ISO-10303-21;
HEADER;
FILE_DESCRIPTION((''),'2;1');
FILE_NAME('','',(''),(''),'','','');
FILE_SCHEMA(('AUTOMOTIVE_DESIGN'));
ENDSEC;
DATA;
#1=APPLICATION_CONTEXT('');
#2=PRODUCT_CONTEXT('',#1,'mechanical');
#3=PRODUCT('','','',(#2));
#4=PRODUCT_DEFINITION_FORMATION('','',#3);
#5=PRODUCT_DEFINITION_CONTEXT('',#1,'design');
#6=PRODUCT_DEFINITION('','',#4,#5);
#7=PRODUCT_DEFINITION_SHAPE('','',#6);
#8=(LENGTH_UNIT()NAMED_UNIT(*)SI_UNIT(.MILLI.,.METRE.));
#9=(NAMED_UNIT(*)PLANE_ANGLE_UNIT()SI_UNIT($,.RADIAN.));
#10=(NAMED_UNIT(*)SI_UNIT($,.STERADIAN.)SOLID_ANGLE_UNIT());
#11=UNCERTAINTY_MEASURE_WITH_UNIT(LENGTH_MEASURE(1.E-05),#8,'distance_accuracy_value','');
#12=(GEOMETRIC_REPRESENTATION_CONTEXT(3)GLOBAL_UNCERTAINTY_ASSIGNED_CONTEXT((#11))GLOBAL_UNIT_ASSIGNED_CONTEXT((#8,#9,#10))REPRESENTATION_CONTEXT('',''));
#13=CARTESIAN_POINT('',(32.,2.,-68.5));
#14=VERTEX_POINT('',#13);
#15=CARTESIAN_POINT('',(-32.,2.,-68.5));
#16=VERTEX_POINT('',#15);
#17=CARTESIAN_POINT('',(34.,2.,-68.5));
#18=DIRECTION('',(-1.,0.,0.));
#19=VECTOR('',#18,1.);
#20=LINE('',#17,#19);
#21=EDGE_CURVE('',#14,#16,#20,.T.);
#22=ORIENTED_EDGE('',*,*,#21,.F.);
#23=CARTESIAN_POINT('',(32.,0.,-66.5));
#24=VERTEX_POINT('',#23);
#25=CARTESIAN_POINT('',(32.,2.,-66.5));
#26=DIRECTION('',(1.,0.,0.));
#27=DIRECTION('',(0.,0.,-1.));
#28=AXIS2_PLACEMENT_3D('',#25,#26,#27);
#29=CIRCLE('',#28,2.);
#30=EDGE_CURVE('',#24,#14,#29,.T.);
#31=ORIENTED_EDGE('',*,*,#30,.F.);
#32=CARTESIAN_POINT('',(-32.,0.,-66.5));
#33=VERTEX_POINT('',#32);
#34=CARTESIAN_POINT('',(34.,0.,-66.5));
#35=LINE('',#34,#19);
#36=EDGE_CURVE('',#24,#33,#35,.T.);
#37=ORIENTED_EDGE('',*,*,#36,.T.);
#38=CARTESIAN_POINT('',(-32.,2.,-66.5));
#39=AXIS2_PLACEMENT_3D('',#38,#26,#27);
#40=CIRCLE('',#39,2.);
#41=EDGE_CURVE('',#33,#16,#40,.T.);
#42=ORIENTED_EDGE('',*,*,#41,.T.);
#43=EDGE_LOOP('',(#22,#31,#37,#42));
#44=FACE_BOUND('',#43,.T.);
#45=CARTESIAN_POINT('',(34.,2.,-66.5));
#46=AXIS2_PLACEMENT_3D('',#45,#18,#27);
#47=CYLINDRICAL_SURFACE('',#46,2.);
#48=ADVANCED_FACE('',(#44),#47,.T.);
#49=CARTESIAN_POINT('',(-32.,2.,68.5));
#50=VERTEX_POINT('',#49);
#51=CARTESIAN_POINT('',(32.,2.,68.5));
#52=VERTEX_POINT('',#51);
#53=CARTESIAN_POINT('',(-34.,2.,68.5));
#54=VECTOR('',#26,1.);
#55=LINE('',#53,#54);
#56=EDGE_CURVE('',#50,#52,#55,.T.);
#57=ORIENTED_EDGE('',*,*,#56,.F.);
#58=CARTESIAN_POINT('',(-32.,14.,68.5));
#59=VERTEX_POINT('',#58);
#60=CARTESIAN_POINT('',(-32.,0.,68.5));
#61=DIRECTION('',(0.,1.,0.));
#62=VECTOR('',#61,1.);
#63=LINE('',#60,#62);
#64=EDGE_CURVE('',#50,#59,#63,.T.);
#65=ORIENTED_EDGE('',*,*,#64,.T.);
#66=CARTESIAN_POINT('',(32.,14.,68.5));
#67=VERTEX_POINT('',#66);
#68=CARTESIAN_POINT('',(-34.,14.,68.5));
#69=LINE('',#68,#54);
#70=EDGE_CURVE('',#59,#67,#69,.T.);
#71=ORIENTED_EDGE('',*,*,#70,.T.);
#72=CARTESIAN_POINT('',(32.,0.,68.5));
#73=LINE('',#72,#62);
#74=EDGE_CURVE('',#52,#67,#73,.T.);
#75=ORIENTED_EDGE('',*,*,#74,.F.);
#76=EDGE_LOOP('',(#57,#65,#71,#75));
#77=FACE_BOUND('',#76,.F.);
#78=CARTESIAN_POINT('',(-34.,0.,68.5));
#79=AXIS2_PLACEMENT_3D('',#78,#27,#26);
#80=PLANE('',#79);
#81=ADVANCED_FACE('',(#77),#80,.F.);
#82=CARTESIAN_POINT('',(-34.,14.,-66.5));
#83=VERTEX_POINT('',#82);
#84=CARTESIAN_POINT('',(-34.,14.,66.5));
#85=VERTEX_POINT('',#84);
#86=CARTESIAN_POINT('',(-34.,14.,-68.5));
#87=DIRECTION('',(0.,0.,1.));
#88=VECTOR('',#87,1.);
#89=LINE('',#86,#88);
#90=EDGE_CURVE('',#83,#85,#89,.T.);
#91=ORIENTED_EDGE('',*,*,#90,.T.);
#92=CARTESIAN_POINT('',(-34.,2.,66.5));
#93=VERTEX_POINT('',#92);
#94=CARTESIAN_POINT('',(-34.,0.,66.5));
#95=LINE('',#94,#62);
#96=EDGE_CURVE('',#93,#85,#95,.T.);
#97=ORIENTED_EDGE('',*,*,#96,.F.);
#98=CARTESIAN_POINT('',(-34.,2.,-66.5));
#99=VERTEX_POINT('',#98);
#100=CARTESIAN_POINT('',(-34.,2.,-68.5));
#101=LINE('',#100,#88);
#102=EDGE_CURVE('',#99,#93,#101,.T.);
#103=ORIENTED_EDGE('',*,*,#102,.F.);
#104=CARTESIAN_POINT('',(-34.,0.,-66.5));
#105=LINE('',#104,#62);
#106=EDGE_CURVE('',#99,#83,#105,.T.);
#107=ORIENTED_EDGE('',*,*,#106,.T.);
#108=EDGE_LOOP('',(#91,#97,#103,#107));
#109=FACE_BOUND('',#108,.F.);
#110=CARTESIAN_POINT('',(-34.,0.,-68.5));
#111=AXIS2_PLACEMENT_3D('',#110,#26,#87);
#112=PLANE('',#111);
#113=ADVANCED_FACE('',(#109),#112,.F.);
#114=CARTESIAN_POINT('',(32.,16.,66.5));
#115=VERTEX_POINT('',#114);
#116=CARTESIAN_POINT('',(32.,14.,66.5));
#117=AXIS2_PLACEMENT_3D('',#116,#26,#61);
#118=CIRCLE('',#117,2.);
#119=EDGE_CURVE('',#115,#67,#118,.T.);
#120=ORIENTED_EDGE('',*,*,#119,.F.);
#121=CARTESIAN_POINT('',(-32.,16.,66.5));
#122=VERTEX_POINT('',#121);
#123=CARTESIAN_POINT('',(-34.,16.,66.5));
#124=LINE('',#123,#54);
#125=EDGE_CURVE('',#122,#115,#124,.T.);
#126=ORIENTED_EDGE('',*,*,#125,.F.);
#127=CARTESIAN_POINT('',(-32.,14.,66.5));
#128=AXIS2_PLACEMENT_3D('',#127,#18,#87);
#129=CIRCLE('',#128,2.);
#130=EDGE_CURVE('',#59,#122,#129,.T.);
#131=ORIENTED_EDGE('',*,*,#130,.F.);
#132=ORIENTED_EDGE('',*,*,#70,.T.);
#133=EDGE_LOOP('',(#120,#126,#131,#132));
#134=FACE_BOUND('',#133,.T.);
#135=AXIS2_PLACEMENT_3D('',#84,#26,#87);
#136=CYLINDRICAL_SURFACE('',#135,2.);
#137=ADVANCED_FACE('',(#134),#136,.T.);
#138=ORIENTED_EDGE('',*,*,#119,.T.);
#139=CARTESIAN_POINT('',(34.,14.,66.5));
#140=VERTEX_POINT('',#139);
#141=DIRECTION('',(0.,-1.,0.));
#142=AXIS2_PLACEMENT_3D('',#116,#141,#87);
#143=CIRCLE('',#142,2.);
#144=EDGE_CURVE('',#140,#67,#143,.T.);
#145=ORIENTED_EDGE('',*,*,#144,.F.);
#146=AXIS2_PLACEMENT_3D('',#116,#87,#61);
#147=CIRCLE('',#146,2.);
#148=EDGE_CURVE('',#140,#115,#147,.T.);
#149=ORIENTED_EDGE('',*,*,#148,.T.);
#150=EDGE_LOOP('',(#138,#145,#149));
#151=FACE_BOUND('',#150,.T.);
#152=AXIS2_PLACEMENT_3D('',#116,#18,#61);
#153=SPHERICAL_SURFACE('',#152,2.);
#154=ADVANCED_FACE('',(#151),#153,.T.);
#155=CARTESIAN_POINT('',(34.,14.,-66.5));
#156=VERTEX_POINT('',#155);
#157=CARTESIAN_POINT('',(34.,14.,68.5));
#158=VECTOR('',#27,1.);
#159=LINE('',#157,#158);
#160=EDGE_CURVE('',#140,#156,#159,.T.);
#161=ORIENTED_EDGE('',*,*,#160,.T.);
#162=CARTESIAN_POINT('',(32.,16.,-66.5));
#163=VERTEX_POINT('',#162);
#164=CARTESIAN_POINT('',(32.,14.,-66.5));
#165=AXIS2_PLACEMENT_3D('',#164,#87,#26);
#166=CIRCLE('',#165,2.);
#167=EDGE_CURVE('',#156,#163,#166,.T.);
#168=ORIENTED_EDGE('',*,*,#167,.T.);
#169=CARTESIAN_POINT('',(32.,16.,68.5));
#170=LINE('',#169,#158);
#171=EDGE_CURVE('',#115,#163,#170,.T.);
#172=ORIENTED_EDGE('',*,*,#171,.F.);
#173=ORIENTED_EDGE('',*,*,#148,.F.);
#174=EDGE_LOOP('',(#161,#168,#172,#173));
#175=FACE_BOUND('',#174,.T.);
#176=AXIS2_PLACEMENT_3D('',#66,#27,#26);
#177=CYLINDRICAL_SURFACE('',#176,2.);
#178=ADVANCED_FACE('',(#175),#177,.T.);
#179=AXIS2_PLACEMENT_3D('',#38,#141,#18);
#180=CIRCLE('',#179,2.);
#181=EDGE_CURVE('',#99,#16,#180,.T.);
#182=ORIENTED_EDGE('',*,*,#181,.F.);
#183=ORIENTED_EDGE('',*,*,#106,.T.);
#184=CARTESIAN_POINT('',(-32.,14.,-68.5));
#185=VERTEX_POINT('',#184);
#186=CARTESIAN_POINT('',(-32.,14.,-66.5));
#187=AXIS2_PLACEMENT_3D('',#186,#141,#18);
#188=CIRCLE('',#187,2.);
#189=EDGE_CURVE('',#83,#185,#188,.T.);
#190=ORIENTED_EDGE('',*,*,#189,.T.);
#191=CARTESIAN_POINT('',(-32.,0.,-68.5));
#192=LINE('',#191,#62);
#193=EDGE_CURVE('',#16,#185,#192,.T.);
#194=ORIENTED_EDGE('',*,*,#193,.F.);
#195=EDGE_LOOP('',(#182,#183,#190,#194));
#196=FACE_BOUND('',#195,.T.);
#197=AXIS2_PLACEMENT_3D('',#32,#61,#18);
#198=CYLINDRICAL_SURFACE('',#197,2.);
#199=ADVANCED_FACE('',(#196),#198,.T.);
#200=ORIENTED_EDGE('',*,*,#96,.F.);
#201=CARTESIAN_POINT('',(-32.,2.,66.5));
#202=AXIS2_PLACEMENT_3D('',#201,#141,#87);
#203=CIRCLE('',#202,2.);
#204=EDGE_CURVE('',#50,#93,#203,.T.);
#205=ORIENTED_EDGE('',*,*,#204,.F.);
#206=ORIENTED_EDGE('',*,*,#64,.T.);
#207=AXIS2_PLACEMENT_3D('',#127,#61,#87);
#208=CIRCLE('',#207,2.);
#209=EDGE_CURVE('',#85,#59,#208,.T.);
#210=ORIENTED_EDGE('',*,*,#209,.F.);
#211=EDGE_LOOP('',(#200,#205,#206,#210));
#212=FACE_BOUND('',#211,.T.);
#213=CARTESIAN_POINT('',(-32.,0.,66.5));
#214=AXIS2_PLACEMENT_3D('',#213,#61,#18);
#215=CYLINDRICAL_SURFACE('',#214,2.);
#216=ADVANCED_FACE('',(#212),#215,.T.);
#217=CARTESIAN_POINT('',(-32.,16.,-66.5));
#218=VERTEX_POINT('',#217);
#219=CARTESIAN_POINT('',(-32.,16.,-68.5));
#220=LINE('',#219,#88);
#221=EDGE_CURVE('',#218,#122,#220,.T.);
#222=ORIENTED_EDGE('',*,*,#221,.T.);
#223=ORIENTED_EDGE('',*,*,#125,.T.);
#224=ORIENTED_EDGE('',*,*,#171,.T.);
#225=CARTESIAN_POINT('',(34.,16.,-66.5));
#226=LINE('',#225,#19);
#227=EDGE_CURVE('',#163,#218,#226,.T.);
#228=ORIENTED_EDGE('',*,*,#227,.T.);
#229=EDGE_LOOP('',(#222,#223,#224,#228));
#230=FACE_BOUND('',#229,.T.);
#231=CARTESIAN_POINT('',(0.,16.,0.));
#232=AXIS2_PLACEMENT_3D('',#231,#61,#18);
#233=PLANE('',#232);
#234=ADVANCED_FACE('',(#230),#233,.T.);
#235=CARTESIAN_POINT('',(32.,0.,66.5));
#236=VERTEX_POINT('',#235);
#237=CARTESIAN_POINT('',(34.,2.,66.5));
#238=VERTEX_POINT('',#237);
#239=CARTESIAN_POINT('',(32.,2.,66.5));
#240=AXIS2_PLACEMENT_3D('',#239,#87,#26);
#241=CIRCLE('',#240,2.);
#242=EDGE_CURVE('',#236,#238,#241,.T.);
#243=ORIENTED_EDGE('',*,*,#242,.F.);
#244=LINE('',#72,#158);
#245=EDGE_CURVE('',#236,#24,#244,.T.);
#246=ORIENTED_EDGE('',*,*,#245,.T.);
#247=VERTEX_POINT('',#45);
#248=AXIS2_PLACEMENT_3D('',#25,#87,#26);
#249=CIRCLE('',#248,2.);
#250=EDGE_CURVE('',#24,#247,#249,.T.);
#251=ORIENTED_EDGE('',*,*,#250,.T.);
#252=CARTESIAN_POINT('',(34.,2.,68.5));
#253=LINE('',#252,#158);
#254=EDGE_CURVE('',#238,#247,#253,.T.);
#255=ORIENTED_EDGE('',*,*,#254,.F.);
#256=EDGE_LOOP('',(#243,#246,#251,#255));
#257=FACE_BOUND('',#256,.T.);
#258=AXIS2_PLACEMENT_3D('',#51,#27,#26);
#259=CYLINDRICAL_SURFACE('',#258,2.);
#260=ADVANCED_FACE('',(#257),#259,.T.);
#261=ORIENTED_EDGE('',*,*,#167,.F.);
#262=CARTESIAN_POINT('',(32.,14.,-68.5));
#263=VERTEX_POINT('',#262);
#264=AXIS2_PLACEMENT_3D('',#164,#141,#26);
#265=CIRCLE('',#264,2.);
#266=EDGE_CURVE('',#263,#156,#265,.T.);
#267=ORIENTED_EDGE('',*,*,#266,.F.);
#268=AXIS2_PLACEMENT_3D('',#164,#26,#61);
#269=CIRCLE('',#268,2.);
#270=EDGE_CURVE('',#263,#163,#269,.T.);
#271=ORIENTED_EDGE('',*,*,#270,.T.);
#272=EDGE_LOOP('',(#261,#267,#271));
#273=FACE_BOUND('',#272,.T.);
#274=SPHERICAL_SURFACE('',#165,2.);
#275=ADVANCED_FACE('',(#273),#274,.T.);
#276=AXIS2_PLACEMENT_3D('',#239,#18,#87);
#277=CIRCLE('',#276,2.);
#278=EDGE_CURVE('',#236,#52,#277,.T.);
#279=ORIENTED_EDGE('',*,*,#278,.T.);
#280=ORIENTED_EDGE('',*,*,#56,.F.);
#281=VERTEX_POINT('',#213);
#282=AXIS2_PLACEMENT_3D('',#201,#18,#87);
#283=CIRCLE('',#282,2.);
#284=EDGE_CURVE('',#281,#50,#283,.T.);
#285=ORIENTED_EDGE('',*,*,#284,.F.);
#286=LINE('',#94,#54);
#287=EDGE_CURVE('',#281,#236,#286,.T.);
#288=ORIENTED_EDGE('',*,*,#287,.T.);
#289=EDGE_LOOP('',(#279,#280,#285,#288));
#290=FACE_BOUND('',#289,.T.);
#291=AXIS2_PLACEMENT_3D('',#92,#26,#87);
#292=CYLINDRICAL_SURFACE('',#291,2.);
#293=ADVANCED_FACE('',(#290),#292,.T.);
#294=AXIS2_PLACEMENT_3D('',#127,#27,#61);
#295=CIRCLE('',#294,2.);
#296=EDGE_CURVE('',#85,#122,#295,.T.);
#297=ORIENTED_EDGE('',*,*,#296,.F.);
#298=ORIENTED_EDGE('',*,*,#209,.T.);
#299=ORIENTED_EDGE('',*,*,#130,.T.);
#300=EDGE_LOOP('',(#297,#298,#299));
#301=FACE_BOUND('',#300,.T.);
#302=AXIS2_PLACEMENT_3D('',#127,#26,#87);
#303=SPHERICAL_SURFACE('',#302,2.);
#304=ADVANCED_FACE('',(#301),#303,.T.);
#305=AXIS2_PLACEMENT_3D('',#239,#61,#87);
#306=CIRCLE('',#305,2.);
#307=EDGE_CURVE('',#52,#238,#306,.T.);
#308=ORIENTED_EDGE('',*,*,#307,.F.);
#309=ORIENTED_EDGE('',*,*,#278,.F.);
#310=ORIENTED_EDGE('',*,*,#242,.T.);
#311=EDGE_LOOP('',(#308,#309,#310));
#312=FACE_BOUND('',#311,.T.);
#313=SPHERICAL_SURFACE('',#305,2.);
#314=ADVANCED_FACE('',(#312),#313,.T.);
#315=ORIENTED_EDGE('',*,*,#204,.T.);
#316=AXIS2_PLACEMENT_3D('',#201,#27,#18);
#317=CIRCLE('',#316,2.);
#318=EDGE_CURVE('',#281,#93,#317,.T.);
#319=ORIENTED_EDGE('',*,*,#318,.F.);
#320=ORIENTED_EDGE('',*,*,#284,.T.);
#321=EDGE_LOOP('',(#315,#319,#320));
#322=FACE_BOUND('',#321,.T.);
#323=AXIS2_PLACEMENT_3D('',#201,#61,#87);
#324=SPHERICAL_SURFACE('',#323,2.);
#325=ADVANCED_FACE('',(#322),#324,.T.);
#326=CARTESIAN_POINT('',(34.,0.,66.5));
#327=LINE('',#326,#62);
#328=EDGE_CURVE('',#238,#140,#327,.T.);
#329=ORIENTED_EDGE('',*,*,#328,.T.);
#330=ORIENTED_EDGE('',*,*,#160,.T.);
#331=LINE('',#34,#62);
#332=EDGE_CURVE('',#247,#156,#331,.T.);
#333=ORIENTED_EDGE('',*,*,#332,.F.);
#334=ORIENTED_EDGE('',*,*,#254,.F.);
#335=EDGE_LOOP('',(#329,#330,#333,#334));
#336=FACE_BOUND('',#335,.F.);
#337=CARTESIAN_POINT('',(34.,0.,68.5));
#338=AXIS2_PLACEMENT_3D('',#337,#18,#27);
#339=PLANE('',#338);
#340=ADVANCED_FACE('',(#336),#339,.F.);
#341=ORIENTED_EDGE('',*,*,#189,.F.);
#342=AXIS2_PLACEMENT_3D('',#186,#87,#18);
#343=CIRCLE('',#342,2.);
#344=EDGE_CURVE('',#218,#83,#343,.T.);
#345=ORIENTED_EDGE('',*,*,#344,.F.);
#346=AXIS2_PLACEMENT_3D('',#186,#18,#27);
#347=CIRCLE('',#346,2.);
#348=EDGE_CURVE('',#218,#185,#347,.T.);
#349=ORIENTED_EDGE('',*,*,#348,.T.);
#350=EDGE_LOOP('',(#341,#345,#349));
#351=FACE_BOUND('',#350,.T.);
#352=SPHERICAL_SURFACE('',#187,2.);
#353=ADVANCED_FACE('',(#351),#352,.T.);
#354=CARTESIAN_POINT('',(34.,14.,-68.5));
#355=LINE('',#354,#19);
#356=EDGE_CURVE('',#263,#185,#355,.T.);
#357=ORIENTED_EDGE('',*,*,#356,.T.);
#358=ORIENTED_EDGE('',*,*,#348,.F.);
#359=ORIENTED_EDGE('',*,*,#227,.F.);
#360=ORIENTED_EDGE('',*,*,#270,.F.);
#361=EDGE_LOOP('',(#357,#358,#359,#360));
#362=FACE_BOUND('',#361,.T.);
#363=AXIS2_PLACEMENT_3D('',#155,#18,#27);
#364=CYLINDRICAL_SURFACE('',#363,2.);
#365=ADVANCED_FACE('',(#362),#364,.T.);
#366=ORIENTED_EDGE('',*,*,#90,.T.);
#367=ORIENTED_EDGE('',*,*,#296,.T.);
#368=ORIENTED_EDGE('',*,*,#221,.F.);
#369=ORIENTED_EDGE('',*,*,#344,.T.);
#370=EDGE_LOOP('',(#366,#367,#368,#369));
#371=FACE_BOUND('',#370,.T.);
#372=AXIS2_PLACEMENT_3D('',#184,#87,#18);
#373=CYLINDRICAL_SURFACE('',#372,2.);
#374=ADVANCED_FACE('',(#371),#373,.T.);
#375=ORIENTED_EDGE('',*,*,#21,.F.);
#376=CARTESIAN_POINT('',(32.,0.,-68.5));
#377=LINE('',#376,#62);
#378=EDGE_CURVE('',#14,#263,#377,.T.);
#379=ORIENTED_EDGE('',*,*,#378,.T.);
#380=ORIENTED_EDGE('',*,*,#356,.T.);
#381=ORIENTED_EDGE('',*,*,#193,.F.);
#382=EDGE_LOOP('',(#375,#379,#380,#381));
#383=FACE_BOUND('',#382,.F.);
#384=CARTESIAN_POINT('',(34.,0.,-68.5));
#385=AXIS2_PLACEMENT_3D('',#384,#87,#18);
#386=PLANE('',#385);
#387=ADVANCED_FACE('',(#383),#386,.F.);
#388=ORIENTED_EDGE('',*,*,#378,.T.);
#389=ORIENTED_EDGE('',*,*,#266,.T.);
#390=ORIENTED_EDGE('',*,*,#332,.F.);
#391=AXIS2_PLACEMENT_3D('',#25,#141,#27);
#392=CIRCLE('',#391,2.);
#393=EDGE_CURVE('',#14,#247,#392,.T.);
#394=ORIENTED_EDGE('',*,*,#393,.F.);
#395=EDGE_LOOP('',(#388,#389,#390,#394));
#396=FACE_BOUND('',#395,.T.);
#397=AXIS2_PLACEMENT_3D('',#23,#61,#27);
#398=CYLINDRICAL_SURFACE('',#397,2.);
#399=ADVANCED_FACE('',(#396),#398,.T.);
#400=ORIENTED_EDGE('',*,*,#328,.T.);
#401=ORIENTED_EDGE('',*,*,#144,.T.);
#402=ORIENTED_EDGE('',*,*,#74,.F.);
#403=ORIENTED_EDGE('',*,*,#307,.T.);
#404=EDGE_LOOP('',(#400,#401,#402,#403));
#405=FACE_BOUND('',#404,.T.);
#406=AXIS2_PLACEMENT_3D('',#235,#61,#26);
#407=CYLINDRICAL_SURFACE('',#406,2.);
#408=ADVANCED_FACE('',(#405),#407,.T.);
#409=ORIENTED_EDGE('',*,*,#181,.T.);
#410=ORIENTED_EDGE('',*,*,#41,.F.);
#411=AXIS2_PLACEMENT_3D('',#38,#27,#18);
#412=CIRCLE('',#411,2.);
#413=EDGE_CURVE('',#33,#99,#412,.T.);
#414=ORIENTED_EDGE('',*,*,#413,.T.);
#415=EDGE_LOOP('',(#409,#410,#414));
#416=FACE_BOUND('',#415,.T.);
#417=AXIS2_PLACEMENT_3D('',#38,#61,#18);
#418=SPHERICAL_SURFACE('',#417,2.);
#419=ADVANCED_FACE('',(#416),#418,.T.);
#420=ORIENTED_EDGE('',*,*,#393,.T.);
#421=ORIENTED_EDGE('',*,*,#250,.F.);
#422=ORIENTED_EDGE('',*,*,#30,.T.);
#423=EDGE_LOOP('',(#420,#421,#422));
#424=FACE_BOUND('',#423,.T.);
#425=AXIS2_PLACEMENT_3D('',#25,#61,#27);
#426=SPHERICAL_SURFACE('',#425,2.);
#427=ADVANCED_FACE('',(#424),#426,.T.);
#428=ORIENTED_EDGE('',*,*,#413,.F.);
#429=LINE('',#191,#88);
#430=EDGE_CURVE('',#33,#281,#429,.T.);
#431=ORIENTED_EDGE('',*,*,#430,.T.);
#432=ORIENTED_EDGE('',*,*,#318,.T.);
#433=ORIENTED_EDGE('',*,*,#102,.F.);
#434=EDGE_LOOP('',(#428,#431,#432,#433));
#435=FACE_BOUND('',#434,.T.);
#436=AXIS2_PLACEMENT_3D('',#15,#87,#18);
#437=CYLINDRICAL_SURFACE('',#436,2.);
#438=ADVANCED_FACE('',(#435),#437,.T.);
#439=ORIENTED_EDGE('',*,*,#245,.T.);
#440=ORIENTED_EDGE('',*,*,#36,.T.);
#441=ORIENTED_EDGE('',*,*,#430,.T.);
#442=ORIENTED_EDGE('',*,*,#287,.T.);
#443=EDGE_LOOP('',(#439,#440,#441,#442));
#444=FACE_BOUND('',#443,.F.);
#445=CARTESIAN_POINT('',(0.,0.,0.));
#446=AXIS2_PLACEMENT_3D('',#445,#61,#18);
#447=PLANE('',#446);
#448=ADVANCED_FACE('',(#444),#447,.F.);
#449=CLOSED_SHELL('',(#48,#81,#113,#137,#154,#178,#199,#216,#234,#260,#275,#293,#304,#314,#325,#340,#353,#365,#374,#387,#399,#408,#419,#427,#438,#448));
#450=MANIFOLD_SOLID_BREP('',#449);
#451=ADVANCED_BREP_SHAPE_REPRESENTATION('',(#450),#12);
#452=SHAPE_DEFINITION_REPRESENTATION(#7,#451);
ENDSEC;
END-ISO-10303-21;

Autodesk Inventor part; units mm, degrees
ref_plane "YZ Plane" through (0, 0, 0) normal (1, 0, 0) x (0, 1, 0)
ref_plane "XZ Plane" through (0, 0, 0) normal (0, 1, 0) x (-1, 0, 0)
ref_plane "XY Plane" through (0, 0, 0) normal (0, 0, 1) x (1, 0, 0)
sketch "Sketch1" plane through (0, 0, 0) normal (0, 1, 0) x (-1, 0, 0)
  line L0 (34, 68.5) -> (-34, 68.5)
  line L1 (-34, 68.5) -> (-34, -68.5)
  line L2 (-34, -68.5) -> (34, -68.5)
  line L3 (34, -68.5) -> (34, 68.5)
  line L4 (34, 68.5) -> (-34, -68.5) construction
  line L5 (-34, 68.5) -> (34, -68.5) construction
  point P0 (0, 0)
  dimension "d0" = 68
  dimension "d1" = 137
extrude "Extrusion1" add sketch "Sketch1" along normal blind 16
fillet "Fillet1" radius 2 3 edges at (0, 16, 68.5) (34, 16, 0) (34, 8, 68.5)
fillet "Fillet1" radius 2 12 edges at (-34, 8, 68.5) (34, 8, 68.5) (0, 0, 68.5) (0, 16, 68.5) (-34, 8, -68.5) (-34, 0, 0) (-34, 16, 0) (34, 8, -68.5) (0, 0, -68.5) (0, 16, -68.5) (34, 0, 0) (34, 16, 0)
properties part number "Battery_Large"
